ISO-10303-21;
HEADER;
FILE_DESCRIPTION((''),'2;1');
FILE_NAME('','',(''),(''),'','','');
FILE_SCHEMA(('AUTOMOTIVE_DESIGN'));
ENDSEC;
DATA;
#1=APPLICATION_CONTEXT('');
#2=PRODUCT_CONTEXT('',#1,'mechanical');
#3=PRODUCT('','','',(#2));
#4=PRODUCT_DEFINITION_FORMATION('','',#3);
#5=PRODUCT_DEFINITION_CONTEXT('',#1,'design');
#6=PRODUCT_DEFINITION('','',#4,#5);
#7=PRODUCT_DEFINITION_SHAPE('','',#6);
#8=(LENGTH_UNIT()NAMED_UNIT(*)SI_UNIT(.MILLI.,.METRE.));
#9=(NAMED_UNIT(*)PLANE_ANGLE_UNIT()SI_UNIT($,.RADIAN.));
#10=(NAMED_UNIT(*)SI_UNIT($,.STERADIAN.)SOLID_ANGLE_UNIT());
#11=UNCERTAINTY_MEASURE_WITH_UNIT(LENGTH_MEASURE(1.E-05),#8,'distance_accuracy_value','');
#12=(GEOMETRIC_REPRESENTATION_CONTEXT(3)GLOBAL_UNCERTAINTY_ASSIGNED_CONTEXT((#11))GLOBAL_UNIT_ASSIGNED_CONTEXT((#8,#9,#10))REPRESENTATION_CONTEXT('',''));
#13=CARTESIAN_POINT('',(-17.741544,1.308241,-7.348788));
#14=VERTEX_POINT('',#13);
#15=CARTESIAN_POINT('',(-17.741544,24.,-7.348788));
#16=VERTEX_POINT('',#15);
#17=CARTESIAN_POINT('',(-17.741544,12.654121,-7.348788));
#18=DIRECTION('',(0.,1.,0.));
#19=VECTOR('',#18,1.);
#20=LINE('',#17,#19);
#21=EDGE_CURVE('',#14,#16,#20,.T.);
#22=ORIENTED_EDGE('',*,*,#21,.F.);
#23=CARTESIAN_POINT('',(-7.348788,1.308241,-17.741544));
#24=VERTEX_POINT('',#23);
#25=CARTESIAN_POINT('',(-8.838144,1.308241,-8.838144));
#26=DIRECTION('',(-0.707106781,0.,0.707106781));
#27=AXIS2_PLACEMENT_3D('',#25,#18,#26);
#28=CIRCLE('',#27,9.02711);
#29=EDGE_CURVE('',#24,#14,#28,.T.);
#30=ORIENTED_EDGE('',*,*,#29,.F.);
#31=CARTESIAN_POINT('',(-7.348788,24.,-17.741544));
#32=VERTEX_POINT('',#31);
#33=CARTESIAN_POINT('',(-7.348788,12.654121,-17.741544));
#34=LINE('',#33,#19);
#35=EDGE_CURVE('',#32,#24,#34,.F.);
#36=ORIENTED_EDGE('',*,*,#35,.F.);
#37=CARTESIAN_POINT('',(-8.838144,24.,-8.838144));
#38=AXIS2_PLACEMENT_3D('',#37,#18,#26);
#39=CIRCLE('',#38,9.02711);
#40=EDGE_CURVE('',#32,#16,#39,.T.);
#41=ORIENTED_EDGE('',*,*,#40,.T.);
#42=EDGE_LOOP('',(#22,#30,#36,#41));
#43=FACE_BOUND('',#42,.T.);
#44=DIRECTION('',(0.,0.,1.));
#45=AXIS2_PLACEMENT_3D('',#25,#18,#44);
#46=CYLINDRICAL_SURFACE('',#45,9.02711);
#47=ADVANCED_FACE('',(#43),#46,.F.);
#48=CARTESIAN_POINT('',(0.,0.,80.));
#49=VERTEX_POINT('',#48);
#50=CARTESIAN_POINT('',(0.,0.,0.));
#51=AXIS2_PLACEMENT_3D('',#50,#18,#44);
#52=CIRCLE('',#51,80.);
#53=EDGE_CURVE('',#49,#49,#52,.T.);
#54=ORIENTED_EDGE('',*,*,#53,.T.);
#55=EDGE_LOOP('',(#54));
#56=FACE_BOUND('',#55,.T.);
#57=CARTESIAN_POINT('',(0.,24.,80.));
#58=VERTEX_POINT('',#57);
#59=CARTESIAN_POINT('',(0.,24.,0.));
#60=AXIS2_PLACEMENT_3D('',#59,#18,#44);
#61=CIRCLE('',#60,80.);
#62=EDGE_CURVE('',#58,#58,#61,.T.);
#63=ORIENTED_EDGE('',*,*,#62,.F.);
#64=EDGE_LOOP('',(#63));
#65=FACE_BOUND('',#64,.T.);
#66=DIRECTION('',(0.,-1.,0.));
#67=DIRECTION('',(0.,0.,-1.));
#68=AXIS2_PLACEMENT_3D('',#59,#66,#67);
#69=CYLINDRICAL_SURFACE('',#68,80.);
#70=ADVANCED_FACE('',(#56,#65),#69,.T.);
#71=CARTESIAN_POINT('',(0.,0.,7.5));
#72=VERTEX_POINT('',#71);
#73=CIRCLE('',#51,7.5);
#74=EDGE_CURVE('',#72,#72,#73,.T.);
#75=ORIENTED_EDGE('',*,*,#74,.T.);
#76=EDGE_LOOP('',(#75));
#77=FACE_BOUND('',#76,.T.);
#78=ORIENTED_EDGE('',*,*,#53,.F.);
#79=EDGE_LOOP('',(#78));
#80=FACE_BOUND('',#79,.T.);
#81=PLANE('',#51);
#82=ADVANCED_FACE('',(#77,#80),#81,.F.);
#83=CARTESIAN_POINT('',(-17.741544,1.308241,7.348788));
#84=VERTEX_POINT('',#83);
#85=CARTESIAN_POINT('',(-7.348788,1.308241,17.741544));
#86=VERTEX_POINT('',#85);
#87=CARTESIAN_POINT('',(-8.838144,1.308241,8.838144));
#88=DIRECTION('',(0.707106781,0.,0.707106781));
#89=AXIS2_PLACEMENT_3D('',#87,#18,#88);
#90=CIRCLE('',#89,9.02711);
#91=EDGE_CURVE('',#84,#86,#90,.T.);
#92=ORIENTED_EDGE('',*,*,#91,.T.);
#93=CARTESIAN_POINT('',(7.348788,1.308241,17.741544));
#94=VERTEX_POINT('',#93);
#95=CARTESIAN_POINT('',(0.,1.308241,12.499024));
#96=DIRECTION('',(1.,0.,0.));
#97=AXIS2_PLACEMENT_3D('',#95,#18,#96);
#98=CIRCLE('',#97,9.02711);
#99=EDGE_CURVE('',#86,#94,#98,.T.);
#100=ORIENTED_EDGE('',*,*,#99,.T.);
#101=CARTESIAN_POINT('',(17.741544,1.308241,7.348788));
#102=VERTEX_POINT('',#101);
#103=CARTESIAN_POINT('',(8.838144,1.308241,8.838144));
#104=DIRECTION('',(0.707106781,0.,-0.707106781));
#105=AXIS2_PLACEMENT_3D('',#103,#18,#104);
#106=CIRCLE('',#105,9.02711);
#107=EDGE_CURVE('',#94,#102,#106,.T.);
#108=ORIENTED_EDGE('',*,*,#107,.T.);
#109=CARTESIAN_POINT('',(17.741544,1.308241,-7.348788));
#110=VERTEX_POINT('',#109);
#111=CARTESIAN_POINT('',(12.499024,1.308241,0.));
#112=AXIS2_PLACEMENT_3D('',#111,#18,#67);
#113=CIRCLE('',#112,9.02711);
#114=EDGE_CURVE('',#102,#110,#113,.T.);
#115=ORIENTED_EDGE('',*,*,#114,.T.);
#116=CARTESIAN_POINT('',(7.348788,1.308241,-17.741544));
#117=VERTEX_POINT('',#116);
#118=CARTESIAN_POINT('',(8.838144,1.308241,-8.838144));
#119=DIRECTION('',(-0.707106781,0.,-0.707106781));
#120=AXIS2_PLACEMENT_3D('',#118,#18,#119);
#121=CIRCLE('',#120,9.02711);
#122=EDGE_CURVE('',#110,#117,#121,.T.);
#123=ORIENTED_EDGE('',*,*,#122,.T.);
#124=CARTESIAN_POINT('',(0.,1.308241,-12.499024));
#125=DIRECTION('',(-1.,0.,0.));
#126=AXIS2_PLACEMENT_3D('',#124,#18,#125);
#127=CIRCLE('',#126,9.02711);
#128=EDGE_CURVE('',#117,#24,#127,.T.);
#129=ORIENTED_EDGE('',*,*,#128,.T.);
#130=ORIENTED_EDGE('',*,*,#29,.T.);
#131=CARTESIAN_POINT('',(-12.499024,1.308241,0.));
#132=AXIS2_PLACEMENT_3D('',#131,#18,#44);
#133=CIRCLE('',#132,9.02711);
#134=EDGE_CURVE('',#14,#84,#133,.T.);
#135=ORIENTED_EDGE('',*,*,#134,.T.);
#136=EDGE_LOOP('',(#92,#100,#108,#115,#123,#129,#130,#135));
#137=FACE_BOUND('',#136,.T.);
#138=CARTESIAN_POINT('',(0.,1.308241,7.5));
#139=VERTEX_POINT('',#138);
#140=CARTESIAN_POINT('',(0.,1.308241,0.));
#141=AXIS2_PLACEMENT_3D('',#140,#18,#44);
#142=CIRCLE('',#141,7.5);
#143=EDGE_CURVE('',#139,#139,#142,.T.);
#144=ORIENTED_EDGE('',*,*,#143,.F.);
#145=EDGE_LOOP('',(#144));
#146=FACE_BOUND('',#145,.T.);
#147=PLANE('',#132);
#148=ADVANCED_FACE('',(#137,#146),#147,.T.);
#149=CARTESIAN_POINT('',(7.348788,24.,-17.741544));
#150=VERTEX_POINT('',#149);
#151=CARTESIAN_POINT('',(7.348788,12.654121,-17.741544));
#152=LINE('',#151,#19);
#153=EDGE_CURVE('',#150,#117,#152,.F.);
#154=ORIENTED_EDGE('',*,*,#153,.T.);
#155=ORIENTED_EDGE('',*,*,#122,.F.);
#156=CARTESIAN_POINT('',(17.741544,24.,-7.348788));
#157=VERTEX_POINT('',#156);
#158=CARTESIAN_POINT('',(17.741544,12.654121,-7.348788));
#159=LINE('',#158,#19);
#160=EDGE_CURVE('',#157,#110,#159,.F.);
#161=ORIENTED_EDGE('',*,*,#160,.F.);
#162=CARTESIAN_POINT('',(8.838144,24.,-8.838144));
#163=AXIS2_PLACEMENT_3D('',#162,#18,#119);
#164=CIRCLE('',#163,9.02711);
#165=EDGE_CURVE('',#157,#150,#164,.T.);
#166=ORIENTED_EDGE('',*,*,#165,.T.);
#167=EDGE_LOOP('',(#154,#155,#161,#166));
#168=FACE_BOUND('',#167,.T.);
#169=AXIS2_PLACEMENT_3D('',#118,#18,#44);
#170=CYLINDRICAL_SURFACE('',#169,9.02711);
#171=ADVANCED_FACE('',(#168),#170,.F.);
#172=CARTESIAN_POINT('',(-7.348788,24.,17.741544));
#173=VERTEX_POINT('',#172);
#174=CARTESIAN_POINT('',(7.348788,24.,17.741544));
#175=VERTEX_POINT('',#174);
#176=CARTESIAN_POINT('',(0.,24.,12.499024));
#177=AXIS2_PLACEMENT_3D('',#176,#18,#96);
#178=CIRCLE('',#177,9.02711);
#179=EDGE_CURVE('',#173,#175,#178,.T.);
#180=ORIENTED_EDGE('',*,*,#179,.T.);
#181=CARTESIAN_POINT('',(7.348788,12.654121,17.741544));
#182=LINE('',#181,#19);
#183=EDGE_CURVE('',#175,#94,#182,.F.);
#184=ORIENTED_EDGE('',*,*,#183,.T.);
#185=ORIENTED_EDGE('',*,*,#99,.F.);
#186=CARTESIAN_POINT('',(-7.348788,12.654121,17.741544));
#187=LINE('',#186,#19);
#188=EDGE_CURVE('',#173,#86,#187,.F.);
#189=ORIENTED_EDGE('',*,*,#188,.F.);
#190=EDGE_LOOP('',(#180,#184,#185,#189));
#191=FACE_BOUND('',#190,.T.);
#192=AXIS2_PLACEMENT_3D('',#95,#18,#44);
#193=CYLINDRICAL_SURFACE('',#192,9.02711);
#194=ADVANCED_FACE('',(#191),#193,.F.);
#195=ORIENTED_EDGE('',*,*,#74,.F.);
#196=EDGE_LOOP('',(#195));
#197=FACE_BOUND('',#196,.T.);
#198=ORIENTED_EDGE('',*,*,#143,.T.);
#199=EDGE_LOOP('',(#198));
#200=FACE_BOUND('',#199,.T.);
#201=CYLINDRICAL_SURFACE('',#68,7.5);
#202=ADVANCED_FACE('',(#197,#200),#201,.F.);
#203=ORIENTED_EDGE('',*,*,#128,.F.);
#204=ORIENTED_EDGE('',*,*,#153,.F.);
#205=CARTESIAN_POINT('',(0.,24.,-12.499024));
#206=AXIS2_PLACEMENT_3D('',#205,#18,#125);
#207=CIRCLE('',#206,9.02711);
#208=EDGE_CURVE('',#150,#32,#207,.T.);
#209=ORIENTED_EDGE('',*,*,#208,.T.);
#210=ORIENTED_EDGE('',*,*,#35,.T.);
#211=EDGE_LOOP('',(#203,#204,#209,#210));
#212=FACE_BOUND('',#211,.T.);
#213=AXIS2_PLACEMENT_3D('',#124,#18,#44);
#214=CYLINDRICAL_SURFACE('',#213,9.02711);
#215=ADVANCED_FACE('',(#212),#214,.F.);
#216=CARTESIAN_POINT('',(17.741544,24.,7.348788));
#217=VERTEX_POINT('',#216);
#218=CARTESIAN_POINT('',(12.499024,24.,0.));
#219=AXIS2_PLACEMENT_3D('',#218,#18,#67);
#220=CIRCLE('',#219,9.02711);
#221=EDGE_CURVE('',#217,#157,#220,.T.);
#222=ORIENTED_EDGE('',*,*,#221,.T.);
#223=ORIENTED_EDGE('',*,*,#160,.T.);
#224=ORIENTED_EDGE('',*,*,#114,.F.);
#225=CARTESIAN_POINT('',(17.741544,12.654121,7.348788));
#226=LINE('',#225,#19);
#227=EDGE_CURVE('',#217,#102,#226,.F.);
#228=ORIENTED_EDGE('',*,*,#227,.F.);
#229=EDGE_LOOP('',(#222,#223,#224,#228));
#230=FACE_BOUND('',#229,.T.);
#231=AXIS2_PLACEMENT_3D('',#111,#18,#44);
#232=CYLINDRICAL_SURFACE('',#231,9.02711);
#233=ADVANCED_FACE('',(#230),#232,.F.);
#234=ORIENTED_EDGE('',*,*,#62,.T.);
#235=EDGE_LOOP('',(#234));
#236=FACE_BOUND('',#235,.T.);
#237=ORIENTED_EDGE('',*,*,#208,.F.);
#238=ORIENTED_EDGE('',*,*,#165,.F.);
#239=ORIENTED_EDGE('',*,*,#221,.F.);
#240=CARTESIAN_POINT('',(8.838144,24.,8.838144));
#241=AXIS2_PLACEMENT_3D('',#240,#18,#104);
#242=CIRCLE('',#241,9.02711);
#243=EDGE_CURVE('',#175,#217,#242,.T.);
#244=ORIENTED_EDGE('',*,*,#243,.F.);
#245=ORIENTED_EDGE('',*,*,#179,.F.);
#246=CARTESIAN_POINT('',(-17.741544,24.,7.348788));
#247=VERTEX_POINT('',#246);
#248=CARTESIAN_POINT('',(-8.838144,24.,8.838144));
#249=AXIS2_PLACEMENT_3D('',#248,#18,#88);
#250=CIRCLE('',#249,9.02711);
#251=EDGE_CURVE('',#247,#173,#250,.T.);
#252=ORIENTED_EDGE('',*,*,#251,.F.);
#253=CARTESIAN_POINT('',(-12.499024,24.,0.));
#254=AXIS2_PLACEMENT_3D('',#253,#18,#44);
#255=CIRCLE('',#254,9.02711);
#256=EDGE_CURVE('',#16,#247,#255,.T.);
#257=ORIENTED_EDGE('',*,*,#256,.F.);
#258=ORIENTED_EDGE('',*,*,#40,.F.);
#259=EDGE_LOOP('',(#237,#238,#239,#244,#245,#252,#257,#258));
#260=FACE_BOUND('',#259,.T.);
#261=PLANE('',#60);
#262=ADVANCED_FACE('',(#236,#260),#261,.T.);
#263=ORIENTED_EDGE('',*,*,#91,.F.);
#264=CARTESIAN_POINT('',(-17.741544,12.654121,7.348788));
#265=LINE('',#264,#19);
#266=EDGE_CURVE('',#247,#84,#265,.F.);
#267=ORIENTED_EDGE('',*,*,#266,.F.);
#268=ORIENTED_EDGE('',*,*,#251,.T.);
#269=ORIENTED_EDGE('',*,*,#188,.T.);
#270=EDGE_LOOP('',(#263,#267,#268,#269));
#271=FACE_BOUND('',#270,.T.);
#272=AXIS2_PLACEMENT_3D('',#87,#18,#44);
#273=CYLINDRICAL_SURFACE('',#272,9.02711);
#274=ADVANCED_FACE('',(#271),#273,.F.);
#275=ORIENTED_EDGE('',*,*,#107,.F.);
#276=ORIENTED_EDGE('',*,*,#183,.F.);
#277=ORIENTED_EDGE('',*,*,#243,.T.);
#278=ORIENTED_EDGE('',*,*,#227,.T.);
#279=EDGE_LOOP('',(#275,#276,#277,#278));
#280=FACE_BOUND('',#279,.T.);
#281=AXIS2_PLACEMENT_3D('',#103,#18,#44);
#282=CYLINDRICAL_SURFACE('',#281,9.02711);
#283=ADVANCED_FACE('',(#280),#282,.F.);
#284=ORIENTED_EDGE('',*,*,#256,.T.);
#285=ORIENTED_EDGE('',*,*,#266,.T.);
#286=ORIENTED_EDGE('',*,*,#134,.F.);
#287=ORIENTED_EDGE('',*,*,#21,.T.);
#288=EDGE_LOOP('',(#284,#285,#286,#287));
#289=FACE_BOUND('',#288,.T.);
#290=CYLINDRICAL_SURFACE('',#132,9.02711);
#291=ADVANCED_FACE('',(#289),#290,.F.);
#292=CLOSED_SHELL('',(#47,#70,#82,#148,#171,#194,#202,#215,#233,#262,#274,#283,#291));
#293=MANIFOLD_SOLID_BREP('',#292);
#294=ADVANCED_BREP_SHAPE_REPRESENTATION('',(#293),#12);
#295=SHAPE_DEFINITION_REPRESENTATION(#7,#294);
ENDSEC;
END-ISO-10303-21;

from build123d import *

# Parameters (mm, degrees)
SKETCH1_R           = 80
BOSS_EXTRUDE1_DEPTH = 24
SKETCH2_R           = 7.5
CUT_EXTRUDE1_DEPTH  = 116.654658358
SKETCH3_R           = 9.027109829
CUT_EXTRUDE2_DEPTH  = 22.69175852
CIRPATTERN1_COUNT   = 8


with BuildPart() as part:
    # Sketch1 → Boss-Extrude1 (new body)
    with BuildSketch(Plane(origin=(0, 0, 0), x_dir=(1, 0, 0), z_dir=(0, 1, 0))):
        Circle(SKETCH1_R)
    extrude(amount=BOSS_EXTRUDE1_DEPTH)

    # Sketch2 → Cut-Extrude1 (cut, through all)
    with BuildSketch(Plane(origin=(0, 0, 0), x_dir=(1, 0, 0), z_dir=(0, 1, 0))):
        Circle(SKETCH2_R)
    extrude(amount=CUT_EXTRUDE1_DEPTH, mode=Mode.SUBTRACT)

    # Sketch3 → Cut-Extrude2 (cut)
    with BuildSketch(Plane(origin=(0, 24, 0), x_dir=(1, 0, 0), z_dir=(0, 1, 0))):
        with Locations((-12.499023748, 0)):
            Circle(SKETCH3_R)
    cut_extrude2 = extrude(amount=-CUT_EXTRUDE2_DEPTH, mode=Mode.SUBTRACT)

    # CirPattern1: Cut-Extrude2 ×8 about axis
    cirpattern1_axis = Axis((0, 0, 0), (0, 1, 0))
    for i in range(1, CIRPATTERN1_COUNT):
        add(cut_extrude2.rotate(cirpattern1_axis, i * 360 / CIRPATTERN1_COUNT), mode=Mode.SUBTRACT)


solid = part.part
